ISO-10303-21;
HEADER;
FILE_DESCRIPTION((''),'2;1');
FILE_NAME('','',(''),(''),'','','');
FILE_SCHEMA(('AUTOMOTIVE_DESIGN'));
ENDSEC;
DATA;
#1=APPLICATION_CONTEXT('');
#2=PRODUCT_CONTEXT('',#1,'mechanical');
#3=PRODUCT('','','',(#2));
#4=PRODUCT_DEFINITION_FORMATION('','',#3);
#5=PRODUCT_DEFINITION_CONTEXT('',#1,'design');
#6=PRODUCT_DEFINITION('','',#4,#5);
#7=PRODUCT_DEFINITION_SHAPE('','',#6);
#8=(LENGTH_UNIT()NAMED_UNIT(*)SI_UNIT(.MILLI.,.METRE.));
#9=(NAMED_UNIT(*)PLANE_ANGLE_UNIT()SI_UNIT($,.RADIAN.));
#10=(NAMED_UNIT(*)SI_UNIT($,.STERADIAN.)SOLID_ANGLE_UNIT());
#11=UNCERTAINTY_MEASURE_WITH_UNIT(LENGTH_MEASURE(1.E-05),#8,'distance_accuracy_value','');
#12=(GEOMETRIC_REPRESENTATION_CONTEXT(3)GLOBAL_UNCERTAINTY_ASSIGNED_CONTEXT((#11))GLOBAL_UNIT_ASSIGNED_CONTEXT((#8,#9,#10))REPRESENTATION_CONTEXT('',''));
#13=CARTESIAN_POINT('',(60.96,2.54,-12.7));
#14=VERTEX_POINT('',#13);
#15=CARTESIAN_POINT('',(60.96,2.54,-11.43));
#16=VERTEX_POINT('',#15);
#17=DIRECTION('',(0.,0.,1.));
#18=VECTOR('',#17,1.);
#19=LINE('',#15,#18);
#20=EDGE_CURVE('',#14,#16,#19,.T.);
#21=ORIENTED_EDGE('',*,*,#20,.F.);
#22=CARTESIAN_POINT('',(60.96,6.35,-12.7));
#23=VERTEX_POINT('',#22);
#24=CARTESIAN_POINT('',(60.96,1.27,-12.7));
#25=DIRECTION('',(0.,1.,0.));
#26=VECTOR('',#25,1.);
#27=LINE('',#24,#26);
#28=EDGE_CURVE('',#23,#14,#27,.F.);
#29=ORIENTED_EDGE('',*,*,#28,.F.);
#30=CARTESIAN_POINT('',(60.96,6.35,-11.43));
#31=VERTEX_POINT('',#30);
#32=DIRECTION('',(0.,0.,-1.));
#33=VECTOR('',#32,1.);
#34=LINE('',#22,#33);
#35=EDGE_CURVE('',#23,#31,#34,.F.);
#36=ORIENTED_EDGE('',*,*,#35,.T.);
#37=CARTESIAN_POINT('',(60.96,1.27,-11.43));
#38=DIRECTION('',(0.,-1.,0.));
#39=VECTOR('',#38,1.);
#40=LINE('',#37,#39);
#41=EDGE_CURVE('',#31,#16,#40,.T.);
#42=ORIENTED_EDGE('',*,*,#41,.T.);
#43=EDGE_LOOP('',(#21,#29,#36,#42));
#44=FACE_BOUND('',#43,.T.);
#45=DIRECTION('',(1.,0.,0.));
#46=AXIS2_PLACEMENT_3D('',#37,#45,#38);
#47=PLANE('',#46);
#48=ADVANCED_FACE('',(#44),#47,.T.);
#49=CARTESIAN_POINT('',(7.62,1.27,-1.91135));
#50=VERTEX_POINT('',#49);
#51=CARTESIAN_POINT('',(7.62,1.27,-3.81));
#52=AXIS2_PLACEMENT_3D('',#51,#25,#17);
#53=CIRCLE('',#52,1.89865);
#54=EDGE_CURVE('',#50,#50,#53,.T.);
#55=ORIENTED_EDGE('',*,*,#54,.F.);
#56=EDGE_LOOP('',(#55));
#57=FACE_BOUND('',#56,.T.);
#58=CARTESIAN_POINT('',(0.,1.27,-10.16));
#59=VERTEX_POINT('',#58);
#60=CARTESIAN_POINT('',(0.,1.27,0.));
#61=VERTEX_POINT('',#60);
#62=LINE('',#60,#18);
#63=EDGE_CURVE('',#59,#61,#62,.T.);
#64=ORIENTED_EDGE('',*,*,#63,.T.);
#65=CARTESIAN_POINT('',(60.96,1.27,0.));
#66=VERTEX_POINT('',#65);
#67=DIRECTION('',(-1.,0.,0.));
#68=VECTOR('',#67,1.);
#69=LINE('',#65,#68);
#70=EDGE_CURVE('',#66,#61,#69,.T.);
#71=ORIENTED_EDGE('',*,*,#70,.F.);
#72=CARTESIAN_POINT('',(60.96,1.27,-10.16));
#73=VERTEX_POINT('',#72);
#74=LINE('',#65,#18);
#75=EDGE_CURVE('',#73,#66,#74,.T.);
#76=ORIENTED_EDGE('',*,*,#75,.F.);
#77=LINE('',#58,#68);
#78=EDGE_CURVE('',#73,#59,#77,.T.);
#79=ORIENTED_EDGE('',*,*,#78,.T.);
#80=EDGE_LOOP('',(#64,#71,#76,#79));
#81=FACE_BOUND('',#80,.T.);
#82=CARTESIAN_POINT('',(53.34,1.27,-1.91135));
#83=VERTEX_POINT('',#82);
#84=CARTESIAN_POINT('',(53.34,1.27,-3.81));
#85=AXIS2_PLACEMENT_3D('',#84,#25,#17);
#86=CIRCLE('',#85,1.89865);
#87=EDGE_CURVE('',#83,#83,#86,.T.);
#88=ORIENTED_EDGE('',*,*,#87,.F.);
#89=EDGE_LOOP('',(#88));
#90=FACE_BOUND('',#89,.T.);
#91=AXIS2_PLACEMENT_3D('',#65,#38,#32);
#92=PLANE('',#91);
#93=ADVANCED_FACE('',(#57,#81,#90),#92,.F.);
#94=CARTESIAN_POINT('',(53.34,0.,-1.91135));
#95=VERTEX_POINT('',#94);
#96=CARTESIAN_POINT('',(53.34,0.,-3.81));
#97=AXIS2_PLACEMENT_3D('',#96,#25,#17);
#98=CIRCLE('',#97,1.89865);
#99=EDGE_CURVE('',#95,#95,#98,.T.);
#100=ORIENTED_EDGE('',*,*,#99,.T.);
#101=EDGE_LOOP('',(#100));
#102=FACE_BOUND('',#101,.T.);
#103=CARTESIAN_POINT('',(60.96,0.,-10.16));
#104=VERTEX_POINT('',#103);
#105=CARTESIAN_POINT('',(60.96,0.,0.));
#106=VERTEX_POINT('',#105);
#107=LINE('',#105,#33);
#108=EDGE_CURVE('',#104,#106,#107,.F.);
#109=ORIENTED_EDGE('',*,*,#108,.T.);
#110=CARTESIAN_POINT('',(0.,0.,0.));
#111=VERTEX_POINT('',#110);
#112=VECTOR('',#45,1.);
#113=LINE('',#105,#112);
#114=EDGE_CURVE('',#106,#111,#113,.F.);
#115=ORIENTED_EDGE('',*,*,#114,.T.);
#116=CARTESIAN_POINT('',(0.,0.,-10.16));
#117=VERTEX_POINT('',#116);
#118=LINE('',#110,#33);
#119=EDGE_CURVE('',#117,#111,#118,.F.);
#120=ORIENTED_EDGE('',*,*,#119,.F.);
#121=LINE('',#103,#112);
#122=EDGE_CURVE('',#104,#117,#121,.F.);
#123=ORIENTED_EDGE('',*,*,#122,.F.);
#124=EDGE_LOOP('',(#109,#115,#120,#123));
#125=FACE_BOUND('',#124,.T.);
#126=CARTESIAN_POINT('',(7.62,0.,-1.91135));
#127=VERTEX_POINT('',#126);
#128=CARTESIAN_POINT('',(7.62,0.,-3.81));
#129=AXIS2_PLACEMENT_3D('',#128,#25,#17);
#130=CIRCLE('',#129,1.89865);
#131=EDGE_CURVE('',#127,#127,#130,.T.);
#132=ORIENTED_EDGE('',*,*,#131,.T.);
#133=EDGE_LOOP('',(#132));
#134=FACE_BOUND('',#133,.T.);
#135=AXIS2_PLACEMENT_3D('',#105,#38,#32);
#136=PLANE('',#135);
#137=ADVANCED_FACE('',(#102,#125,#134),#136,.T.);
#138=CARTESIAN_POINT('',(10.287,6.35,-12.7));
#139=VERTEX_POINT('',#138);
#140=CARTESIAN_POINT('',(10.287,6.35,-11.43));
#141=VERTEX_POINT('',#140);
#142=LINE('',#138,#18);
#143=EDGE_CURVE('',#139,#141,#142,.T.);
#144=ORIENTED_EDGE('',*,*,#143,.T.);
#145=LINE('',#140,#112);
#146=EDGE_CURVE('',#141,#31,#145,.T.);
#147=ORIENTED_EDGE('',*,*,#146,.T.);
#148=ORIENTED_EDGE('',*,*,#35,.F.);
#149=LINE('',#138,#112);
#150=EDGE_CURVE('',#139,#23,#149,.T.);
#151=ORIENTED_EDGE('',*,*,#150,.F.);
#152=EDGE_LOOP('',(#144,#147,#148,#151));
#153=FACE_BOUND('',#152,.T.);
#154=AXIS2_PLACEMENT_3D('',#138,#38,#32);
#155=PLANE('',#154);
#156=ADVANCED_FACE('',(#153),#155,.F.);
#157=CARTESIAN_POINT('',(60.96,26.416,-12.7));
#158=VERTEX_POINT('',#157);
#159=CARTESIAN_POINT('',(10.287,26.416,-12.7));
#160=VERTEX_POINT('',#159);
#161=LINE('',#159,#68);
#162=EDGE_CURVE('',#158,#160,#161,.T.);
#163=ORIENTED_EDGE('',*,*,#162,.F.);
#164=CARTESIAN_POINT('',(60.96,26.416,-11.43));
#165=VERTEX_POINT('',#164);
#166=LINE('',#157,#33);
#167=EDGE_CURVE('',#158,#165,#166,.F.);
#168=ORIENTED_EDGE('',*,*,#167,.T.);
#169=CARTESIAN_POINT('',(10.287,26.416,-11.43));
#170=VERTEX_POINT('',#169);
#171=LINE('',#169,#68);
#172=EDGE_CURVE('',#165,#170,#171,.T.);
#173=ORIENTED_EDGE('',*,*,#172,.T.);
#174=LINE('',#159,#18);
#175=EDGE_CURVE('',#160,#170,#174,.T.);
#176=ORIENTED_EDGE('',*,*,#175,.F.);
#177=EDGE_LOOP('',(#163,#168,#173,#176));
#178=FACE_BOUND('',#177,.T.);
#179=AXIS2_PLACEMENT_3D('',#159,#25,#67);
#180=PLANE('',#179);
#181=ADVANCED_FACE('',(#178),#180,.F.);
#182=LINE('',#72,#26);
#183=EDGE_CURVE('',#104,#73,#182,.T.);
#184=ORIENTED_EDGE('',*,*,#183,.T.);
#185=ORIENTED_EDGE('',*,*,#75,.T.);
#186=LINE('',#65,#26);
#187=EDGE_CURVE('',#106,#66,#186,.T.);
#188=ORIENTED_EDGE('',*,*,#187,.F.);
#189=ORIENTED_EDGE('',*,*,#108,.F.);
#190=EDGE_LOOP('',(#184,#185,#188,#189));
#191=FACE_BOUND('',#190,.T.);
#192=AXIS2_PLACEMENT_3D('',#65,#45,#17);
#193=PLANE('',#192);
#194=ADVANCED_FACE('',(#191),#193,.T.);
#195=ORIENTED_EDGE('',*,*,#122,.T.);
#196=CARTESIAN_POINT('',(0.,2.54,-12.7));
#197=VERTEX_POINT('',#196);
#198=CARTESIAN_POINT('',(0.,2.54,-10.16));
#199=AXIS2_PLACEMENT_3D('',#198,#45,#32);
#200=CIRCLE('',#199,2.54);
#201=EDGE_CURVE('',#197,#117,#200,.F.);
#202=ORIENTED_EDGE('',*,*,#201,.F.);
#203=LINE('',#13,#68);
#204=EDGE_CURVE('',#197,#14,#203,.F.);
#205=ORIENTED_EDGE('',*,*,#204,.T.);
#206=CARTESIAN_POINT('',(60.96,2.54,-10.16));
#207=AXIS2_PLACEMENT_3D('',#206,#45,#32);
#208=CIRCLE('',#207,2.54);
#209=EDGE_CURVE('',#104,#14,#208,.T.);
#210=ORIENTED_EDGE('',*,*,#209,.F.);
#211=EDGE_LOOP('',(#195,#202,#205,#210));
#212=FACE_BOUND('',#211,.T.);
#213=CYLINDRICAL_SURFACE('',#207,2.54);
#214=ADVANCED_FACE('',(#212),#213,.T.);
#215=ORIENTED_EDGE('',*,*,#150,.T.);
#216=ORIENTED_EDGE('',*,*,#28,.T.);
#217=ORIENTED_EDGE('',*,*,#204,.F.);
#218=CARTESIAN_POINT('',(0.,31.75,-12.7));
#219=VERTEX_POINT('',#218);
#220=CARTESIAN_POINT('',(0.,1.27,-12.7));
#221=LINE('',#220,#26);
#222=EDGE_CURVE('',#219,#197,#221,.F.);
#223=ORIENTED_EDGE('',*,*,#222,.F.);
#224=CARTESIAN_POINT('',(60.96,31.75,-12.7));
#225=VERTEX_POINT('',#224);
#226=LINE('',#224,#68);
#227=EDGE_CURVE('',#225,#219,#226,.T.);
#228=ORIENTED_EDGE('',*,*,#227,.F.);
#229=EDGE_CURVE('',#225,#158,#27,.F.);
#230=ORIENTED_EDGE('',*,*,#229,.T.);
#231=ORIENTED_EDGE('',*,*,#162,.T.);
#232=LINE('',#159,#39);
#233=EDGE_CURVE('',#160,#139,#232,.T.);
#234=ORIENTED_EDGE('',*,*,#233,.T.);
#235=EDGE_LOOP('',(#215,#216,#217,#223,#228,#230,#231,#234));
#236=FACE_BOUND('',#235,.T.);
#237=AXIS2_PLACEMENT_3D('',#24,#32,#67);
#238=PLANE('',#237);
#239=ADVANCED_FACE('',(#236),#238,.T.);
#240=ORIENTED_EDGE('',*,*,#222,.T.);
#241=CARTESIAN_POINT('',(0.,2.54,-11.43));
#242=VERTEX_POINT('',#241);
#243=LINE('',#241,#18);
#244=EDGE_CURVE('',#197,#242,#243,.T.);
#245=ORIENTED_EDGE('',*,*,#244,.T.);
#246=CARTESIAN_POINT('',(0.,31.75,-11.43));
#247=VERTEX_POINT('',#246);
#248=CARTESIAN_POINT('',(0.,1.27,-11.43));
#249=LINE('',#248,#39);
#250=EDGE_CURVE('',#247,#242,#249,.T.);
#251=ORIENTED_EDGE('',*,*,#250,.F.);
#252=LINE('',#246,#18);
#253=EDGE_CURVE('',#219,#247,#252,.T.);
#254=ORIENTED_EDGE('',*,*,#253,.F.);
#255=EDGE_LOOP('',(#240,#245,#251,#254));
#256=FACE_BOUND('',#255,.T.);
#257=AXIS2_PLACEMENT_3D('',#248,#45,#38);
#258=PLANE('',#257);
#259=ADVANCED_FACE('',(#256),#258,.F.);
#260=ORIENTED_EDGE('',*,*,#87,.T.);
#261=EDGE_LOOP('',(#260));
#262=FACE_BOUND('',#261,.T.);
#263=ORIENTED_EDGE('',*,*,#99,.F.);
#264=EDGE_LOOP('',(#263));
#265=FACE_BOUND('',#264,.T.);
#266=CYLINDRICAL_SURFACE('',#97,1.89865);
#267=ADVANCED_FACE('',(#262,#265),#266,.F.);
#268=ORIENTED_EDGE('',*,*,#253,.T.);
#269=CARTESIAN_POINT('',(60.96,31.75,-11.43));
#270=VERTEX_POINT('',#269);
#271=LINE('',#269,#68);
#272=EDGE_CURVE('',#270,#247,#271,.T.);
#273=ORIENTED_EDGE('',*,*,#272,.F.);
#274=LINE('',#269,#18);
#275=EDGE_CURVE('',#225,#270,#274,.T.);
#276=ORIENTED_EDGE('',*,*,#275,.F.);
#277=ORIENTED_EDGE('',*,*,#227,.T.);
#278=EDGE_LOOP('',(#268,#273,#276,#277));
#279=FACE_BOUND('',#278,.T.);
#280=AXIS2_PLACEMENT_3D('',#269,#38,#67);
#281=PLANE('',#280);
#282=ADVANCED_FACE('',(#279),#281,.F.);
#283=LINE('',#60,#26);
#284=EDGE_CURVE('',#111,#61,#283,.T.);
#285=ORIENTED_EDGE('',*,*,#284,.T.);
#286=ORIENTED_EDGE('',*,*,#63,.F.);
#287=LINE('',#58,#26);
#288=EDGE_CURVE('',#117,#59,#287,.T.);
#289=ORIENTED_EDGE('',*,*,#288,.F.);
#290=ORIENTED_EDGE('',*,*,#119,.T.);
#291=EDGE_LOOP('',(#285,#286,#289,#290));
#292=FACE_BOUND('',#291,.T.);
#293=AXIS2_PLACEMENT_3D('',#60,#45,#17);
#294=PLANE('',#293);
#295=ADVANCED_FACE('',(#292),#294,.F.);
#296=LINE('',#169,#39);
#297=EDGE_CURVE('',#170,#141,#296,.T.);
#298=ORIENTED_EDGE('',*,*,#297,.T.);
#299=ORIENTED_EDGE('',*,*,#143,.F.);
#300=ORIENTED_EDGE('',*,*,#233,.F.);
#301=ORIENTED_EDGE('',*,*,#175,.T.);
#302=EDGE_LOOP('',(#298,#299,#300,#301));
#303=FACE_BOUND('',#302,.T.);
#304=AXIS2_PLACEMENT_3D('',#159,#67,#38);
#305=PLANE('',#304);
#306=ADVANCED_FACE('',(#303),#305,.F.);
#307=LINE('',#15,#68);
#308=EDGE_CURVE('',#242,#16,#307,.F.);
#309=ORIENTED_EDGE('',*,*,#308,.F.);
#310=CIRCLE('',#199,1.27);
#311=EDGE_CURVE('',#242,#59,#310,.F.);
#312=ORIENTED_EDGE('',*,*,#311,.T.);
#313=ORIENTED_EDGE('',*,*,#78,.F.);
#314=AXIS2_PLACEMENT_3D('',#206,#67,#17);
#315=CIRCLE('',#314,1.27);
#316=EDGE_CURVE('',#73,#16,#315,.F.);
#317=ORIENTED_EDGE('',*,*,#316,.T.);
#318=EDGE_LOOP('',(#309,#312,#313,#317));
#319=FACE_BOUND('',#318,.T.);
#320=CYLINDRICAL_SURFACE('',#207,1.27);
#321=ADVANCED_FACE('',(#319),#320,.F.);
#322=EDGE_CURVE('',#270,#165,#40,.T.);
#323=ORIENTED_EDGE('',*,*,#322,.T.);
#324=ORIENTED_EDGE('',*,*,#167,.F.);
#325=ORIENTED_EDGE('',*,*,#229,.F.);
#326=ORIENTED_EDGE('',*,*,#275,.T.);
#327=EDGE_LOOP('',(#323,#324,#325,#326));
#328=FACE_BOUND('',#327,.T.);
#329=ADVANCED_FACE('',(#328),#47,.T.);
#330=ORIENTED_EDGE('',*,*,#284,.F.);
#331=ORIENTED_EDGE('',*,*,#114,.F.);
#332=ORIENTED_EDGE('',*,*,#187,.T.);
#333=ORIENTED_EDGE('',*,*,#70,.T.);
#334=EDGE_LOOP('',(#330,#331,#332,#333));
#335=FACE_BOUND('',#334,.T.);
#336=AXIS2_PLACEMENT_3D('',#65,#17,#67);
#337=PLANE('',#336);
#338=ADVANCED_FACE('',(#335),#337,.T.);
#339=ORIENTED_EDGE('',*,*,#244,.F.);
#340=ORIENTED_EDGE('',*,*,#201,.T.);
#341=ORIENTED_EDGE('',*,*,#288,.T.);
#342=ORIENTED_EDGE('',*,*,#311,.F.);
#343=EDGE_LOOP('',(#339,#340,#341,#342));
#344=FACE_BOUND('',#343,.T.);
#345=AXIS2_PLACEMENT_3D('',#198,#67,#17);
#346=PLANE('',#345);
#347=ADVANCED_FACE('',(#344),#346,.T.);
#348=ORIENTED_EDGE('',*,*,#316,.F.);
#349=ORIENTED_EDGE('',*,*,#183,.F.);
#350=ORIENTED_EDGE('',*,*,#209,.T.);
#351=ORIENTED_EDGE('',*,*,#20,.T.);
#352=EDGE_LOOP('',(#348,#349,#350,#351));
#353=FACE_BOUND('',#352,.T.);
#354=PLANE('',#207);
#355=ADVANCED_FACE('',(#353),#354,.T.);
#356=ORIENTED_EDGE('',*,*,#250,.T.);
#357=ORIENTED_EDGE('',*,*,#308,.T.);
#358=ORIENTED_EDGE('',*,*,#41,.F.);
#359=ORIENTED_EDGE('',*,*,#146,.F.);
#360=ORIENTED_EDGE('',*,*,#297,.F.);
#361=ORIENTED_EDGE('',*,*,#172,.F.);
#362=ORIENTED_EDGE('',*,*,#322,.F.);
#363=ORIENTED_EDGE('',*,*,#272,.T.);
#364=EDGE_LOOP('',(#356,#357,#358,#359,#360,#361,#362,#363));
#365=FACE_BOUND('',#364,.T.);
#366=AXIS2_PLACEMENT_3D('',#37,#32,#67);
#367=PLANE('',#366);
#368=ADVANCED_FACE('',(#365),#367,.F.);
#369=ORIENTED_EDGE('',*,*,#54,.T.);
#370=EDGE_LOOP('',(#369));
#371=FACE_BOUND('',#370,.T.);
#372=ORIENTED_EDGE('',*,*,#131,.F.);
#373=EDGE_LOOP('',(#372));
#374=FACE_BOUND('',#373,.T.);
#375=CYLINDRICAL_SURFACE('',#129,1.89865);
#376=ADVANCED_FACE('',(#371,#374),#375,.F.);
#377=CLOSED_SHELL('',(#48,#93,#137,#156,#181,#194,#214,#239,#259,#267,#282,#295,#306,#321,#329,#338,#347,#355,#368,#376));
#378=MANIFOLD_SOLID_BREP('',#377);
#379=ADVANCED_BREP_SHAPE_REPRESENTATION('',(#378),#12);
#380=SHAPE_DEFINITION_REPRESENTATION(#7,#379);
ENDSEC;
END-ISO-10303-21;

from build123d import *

# Parameters (mm, degrees)
BOSS_EXTRUDE1_DEPTH    = 60.96
CONVERT_SOLID1_DEPTH   = 60.96
CONVERT_SOLID1_2_DEPTH = 60.96
SKETCH6_W              = 40.386
SKETCH6_H              = 20.066
CUT_EXTRUDE1_DEPTH     = 70.67660296
SKETCH8_R              = 1.89865
CUT_EXTRUDE2_DEPTH     = 70.328507845
SKETCH11_W             = 18.1335173
SKETCH11_H             = 20.066
CUT_EXTRUDE5_DEPTH     = 70.67660296


# Read off the part's stored shape, not the designer's step: Convert-Solid1
with BuildPart() as part:
    # Sketch1 → Boss-Extrude1 (new body)
    with BuildSketch(Plane(origin=(0, 0, 0), x_dir=(0, 0, -1), z_dir=(1, 0, 0))):
        Polygon((0, 0), (12.7, 0), (12.7, 31.75), (11.43, 31.75), (11.43, 1.27), (0, 1.27), align=None)
    extrude(amount=BOSS_EXTRUDE1_DEPTH)

    # Convert-Solid1 outline → Convert-Solid1 (cut)
    with BuildSketch(Plane.YZ):
        with BuildLine():
            ThreePointArc((2.54, -12.7), (0.743948776, -11.956051224), (0, -10.16))
            Line((0, -10.16), (0, -12.7))
            Line((0, -12.7), (2.54, -12.7))
        make_face()
    extrude(amount=CONVERT_SOLID1_DEPTH, mode=Mode.SUBTRACT)

    # Convert-Solid1 2 outline → Convert-Solid1 2 (add)
    with BuildSketch(Plane.YZ):
        with BuildLine():
            ThreePointArc((2.54, -11.43), (1.641974388, -11.058025612), (1.27, -10.16))
            Line((1.27, -10.16), (1.27, -11.43))
            Line((1.27, -11.43), (2.54, -11.43))
        make_face()
    extrude(amount=CONVERT_SOLID1_2_DEPTH)

    # Sketch6 → Cut-Extrude1 (cut, through all)
    with BuildSketch(Plane.XY.offset(-11.43)):
        with Locations((30.48, 16.383)):
            Rectangle(SKETCH6_W, SKETCH6_H)
    extrude(amount=-CUT_EXTRUDE1_DEPTH, mode=Mode.SUBTRACT)

    # Sketch8 → Cut-Extrude2 (cut, through all)
    with BuildSketch(Plane(origin=(0, 1.27, 0), x_dir=(1, 0, 0), z_dir=(0, 1, 0))):
        with Locations(Location((7.62, 3.81, 0), (0, 0, 270))):
            Circle(SKETCH8_R)
        with Locations(Location((53.34, 3.81, 0), (0, 0, 270))):
            Circle(SKETCH8_R)
    extrude(amount=-CUT_EXTRUDE2_DEPTH, mode=Mode.SUBTRACT)

    # Sketch11 → Cut-Extrude5 (cut, through all)
    with BuildSketch(Plane.XY.offset(-11.43)):
        with Locations((59.73975865, 16.383)):
            Rectangle(SKETCH11_W, SKETCH11_H)
    extrude(amount=-CUT_EXTRUDE5_DEPTH, mode=Mode.SUBTRACT)


solid = part.part
